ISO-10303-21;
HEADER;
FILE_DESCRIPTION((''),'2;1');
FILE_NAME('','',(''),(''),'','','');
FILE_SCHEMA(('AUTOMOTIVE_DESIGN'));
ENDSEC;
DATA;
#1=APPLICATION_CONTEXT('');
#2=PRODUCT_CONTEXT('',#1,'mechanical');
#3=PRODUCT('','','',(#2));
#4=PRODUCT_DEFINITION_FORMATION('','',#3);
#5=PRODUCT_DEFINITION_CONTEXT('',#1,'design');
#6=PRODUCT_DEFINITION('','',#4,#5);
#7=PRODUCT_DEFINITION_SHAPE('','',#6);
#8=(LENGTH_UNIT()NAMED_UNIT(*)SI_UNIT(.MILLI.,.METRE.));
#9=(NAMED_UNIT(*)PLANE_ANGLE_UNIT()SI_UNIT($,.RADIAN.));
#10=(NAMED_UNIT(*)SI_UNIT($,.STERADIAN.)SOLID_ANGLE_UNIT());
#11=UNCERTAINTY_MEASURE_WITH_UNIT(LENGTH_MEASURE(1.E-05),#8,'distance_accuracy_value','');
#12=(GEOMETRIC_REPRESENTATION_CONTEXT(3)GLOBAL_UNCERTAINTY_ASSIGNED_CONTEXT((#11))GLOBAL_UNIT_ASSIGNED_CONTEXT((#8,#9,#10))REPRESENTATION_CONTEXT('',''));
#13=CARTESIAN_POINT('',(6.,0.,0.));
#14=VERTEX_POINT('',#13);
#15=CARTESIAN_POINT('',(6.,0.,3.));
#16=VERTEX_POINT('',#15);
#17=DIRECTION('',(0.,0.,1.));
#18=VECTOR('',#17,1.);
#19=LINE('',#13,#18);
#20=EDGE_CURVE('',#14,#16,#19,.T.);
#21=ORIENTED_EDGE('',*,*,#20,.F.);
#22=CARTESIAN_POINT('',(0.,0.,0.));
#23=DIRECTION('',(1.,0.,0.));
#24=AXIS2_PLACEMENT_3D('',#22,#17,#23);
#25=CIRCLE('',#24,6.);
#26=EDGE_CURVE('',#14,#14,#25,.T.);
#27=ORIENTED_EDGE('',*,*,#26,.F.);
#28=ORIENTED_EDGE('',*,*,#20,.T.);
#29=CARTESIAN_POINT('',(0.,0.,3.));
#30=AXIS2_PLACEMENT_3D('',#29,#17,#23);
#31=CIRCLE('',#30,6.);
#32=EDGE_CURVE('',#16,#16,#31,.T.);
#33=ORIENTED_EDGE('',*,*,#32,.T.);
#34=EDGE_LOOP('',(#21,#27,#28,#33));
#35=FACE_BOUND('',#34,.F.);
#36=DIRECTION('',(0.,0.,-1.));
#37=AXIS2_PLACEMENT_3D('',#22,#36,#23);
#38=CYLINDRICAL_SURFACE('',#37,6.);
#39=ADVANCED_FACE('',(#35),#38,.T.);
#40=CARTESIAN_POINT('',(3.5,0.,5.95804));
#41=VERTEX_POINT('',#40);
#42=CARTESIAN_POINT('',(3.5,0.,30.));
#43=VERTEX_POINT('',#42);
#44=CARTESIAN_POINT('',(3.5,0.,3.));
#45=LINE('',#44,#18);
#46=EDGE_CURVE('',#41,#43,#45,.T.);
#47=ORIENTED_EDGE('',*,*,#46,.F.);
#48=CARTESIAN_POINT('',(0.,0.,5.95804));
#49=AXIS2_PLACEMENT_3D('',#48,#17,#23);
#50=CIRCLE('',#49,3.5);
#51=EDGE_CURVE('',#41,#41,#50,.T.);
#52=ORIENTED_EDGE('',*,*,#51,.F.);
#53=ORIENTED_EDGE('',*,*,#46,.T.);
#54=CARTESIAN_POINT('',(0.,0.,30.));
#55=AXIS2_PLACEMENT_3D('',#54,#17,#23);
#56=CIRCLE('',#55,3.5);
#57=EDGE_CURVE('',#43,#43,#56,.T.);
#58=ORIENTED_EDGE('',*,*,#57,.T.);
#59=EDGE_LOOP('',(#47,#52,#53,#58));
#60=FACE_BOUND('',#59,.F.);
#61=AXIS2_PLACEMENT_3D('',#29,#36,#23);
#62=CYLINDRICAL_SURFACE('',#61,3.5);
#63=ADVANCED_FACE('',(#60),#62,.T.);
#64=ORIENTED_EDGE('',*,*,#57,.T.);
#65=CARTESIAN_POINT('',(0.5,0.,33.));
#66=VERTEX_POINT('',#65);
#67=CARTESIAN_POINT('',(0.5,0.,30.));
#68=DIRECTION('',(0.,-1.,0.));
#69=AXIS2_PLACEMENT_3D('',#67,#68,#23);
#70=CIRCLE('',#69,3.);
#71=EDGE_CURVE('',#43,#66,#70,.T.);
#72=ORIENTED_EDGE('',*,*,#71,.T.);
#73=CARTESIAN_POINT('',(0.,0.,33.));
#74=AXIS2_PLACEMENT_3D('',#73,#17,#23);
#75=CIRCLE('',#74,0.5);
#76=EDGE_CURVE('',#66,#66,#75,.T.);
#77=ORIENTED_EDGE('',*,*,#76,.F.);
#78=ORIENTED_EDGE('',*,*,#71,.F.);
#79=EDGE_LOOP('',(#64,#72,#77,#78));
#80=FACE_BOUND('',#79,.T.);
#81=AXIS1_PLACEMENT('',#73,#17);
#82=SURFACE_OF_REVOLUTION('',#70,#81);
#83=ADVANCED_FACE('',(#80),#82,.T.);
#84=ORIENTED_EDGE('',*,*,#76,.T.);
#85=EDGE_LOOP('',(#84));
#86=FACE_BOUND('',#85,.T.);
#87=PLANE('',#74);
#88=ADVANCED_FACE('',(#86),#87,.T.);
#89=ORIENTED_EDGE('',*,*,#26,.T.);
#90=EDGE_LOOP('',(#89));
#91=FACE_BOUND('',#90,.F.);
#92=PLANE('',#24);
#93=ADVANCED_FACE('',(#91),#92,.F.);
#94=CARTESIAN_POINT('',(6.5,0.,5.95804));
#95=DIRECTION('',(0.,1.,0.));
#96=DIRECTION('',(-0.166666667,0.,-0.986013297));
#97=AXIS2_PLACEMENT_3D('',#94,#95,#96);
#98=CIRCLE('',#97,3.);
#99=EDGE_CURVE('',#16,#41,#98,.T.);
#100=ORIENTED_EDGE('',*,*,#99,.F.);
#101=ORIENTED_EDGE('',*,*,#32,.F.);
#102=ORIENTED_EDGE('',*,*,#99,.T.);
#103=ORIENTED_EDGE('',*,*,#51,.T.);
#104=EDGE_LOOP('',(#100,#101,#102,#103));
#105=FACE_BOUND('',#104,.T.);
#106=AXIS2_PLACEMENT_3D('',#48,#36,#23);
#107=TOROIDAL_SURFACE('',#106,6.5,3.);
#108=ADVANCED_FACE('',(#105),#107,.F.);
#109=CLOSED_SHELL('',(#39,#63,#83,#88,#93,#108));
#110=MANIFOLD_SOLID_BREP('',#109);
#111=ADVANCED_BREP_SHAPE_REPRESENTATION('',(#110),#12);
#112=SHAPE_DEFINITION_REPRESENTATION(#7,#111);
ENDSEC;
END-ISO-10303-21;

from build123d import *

# Parameters (mm, degrees)
F0_R     = 6
F1_DEPTH = 3
F2_R     = 3.5
F3_DEPTH = 30


# Not quite as in the source:
# - a fillet or chamfer that OpenCascade refuses, or shapes differently, is made with other operations: its cross-section is extruded or revolved along the edge and cut away or added


with BuildPart() as f1:
    # F0 (on Top) → F1 (new body)
    with BuildSketch(Plane.XY):
        Circle(F0_R)
    extrude(amount=F1_DEPTH)

    # F2 (on face) → F3 (join)
    with BuildSketch(Plane.XY.offset(3)):
        Circle(F2_R)
    extrude(amount=F3_DEPTH)

    # F4: fillet of radius 3 on 2 edges, made by hand

    # F4_s1 → F4_t2 (revolve)
    with BuildSketch(Plane.XZ):
        with BuildLine():
            ThreePointArc((6, 3), (4.2087121525, 4.0215482184), (3.5, 5.9580398916))
            Line((3.5, 5.9580398916), (3.5, 3))
            Line((3.5, 3), (6, 3))
        make_face()
    revolve(axis=Axis((0, 0, 3), (0, 0, 1)))

    # F4_s3 → F4_t4 (revolve, cut)
    with BuildSketch(Plane.XZ):
        with BuildLine():
            ThreePointArc((3.5, 30), (2.6213203436, 32.1213203436), (0.5, 33))
            Line((0.5, 33), (3.5, 33))
            Line((3.5, 33), (3.5, 30))
        make_face()
    revolve(axis=Axis((0, 0, 33), (0, 0, 1)), mode=Mode.SUBTRACT)


solid = f1.part
